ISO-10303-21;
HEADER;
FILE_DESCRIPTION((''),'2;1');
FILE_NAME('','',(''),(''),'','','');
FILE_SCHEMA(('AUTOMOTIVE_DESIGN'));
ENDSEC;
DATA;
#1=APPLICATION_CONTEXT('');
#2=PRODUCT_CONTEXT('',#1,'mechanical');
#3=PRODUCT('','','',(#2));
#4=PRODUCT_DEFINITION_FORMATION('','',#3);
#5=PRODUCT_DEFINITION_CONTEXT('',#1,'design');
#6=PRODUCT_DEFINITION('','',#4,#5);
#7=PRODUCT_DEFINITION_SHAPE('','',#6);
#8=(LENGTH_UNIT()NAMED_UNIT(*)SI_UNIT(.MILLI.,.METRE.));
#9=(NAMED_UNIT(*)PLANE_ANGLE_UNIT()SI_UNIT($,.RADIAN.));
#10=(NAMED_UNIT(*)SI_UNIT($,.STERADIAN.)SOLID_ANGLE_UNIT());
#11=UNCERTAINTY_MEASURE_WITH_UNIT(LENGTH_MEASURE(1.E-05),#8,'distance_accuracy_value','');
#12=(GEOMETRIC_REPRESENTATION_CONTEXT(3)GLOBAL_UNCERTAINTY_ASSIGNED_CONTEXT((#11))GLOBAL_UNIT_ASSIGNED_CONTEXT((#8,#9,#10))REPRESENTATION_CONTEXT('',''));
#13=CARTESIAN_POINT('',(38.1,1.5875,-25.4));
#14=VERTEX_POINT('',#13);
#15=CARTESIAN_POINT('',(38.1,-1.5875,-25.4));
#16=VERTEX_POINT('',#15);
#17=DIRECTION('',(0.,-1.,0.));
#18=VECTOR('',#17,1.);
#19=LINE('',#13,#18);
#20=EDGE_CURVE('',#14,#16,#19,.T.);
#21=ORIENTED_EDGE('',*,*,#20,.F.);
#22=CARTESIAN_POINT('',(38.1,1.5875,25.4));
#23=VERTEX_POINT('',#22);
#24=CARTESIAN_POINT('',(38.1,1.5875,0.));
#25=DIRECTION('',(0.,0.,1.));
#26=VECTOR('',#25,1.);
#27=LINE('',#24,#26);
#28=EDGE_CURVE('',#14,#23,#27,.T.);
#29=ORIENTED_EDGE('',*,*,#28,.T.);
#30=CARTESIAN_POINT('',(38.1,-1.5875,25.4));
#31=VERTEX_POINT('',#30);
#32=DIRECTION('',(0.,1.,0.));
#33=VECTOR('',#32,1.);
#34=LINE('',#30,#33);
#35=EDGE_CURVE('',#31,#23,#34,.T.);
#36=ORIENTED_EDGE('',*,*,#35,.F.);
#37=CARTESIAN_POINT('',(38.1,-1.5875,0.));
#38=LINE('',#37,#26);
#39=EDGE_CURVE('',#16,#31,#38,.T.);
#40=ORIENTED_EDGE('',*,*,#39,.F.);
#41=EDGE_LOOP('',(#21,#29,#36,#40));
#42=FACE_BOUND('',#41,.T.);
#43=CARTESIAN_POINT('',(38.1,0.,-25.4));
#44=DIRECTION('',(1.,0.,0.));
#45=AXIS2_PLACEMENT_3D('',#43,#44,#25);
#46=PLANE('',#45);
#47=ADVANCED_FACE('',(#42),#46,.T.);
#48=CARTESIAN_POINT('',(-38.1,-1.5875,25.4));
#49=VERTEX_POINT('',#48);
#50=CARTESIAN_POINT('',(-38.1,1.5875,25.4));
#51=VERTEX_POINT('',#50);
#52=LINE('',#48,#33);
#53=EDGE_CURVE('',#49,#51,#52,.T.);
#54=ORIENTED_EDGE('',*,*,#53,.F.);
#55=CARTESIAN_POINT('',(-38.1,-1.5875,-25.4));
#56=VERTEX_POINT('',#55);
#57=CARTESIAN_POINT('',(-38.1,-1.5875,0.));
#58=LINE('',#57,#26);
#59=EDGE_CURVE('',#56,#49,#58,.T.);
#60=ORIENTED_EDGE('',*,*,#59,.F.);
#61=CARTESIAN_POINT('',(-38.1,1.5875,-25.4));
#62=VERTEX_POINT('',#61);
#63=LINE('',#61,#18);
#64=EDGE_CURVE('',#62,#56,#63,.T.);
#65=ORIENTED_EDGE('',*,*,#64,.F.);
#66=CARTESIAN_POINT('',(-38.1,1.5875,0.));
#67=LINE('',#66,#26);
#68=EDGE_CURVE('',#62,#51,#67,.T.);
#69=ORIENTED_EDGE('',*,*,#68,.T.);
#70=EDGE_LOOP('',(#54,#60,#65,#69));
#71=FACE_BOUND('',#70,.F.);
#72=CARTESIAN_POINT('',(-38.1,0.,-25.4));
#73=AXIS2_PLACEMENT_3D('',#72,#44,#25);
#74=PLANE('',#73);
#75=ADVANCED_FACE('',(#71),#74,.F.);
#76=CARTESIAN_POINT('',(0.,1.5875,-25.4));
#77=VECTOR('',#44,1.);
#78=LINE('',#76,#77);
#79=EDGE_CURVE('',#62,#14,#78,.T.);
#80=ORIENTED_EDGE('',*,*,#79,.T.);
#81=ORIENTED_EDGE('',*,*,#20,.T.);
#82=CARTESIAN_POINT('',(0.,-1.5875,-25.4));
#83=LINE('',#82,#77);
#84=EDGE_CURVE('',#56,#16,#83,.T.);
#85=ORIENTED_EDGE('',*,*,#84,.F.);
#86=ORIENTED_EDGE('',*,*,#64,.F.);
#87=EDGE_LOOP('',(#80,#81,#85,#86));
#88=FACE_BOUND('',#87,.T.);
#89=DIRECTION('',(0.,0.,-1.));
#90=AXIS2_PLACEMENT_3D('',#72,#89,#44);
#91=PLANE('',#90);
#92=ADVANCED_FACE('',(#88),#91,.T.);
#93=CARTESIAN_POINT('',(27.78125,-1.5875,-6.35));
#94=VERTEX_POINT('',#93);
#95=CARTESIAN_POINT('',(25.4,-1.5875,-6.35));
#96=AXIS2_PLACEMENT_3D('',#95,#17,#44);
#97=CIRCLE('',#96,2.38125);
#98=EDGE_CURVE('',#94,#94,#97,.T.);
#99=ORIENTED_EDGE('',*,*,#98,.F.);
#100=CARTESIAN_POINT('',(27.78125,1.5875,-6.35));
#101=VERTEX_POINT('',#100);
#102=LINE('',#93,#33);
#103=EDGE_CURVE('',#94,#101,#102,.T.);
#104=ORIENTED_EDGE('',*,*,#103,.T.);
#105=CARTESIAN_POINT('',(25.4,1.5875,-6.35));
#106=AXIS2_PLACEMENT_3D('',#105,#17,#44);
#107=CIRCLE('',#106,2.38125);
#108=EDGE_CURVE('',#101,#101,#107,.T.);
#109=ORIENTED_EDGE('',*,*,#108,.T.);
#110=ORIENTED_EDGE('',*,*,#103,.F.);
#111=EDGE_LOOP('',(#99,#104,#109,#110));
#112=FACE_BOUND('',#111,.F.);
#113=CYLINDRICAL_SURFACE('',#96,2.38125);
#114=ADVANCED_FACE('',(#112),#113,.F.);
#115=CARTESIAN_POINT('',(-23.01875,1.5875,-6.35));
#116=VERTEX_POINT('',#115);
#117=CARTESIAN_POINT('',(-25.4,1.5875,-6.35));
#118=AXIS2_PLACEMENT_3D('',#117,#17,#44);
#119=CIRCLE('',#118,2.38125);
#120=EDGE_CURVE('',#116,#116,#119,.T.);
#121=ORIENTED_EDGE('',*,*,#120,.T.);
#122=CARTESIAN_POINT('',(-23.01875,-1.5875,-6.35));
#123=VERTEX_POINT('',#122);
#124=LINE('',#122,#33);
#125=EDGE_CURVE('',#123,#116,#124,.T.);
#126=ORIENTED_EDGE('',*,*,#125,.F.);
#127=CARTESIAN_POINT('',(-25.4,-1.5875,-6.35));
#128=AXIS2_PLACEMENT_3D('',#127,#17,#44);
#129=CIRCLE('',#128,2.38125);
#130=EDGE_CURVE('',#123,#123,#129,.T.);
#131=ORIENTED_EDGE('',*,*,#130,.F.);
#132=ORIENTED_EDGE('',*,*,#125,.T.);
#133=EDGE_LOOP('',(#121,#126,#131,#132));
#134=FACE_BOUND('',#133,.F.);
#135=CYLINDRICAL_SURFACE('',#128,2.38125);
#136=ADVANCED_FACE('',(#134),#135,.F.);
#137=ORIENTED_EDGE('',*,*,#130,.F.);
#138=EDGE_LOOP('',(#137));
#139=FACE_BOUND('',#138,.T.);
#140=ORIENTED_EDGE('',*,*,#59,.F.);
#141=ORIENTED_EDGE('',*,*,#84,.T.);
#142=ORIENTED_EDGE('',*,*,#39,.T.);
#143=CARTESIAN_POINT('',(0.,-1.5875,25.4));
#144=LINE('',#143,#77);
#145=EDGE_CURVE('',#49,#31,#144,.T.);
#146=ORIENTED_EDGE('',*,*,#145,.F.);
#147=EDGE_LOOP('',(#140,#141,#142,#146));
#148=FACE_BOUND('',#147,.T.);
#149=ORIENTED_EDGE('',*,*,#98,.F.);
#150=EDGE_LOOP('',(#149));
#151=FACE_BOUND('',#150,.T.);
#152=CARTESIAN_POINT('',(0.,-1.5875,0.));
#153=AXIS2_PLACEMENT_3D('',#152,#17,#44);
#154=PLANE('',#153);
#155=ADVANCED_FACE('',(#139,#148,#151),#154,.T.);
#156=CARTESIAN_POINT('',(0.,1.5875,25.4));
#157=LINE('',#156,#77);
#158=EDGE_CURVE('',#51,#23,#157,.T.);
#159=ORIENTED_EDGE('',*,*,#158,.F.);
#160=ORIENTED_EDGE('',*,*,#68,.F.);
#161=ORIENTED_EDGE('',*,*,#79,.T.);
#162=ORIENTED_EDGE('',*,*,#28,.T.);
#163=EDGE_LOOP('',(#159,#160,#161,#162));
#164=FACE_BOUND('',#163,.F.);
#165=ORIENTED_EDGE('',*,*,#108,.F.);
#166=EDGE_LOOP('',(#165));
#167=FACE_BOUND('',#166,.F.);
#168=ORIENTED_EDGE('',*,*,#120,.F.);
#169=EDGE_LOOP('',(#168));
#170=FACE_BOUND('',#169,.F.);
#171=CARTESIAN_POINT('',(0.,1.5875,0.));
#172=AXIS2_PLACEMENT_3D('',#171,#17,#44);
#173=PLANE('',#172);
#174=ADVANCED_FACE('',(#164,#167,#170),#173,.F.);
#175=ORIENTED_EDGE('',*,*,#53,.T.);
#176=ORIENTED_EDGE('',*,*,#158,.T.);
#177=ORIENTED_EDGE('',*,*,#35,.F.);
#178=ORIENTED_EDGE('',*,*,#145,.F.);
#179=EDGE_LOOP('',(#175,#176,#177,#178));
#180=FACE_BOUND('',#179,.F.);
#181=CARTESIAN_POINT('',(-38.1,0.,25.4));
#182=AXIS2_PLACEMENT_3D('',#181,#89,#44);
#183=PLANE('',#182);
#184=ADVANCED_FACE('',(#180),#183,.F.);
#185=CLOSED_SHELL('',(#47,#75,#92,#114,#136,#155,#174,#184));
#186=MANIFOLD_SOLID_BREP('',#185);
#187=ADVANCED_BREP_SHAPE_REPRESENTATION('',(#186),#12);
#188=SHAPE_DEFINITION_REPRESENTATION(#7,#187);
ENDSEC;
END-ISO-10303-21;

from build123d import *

# Parameters (mm, degrees)
F0_W     = 76.2
F0_H     = 50.8
F1_DEPTH = 1.5875
F2_R     = 2.38125
F4_DEPTH = 3.175
F3_R     = 2.38125
F5_DEPTH = 3.175


# Not quite as in the source:
# - a length typed as a fraction of an inch, garbled in the dataset ("3 / 203.2 mm" for 3/8 in), is restored


with BuildPart() as f1:
    # F0 (on Front) → F1 (new body, symmetric)
    with BuildSketch(Plane.XZ):
        Rectangle(F0_W, F0_H)
    extrude(amount=F1_DEPTH, both=True)

    # F2 (on face) → F4 (cut, through all)
    with BuildSketch(Plane.XZ.offset(1.5875)):
        with Locations((-25.4, -6.35)):
            Circle(F2_R)
    extrude(amount=-F4_DEPTH, mode=Mode.SUBTRACT)

    # F3 (on face) → F5 (cut, through all)
    with BuildSketch(Plane.XZ.offset(1.5875)):
        with Locations((25.4, -6.35)):
            Circle(F3_R)
    extrude(amount=-F5_DEPTH, mode=Mode.SUBTRACT)


solid = f1.part
